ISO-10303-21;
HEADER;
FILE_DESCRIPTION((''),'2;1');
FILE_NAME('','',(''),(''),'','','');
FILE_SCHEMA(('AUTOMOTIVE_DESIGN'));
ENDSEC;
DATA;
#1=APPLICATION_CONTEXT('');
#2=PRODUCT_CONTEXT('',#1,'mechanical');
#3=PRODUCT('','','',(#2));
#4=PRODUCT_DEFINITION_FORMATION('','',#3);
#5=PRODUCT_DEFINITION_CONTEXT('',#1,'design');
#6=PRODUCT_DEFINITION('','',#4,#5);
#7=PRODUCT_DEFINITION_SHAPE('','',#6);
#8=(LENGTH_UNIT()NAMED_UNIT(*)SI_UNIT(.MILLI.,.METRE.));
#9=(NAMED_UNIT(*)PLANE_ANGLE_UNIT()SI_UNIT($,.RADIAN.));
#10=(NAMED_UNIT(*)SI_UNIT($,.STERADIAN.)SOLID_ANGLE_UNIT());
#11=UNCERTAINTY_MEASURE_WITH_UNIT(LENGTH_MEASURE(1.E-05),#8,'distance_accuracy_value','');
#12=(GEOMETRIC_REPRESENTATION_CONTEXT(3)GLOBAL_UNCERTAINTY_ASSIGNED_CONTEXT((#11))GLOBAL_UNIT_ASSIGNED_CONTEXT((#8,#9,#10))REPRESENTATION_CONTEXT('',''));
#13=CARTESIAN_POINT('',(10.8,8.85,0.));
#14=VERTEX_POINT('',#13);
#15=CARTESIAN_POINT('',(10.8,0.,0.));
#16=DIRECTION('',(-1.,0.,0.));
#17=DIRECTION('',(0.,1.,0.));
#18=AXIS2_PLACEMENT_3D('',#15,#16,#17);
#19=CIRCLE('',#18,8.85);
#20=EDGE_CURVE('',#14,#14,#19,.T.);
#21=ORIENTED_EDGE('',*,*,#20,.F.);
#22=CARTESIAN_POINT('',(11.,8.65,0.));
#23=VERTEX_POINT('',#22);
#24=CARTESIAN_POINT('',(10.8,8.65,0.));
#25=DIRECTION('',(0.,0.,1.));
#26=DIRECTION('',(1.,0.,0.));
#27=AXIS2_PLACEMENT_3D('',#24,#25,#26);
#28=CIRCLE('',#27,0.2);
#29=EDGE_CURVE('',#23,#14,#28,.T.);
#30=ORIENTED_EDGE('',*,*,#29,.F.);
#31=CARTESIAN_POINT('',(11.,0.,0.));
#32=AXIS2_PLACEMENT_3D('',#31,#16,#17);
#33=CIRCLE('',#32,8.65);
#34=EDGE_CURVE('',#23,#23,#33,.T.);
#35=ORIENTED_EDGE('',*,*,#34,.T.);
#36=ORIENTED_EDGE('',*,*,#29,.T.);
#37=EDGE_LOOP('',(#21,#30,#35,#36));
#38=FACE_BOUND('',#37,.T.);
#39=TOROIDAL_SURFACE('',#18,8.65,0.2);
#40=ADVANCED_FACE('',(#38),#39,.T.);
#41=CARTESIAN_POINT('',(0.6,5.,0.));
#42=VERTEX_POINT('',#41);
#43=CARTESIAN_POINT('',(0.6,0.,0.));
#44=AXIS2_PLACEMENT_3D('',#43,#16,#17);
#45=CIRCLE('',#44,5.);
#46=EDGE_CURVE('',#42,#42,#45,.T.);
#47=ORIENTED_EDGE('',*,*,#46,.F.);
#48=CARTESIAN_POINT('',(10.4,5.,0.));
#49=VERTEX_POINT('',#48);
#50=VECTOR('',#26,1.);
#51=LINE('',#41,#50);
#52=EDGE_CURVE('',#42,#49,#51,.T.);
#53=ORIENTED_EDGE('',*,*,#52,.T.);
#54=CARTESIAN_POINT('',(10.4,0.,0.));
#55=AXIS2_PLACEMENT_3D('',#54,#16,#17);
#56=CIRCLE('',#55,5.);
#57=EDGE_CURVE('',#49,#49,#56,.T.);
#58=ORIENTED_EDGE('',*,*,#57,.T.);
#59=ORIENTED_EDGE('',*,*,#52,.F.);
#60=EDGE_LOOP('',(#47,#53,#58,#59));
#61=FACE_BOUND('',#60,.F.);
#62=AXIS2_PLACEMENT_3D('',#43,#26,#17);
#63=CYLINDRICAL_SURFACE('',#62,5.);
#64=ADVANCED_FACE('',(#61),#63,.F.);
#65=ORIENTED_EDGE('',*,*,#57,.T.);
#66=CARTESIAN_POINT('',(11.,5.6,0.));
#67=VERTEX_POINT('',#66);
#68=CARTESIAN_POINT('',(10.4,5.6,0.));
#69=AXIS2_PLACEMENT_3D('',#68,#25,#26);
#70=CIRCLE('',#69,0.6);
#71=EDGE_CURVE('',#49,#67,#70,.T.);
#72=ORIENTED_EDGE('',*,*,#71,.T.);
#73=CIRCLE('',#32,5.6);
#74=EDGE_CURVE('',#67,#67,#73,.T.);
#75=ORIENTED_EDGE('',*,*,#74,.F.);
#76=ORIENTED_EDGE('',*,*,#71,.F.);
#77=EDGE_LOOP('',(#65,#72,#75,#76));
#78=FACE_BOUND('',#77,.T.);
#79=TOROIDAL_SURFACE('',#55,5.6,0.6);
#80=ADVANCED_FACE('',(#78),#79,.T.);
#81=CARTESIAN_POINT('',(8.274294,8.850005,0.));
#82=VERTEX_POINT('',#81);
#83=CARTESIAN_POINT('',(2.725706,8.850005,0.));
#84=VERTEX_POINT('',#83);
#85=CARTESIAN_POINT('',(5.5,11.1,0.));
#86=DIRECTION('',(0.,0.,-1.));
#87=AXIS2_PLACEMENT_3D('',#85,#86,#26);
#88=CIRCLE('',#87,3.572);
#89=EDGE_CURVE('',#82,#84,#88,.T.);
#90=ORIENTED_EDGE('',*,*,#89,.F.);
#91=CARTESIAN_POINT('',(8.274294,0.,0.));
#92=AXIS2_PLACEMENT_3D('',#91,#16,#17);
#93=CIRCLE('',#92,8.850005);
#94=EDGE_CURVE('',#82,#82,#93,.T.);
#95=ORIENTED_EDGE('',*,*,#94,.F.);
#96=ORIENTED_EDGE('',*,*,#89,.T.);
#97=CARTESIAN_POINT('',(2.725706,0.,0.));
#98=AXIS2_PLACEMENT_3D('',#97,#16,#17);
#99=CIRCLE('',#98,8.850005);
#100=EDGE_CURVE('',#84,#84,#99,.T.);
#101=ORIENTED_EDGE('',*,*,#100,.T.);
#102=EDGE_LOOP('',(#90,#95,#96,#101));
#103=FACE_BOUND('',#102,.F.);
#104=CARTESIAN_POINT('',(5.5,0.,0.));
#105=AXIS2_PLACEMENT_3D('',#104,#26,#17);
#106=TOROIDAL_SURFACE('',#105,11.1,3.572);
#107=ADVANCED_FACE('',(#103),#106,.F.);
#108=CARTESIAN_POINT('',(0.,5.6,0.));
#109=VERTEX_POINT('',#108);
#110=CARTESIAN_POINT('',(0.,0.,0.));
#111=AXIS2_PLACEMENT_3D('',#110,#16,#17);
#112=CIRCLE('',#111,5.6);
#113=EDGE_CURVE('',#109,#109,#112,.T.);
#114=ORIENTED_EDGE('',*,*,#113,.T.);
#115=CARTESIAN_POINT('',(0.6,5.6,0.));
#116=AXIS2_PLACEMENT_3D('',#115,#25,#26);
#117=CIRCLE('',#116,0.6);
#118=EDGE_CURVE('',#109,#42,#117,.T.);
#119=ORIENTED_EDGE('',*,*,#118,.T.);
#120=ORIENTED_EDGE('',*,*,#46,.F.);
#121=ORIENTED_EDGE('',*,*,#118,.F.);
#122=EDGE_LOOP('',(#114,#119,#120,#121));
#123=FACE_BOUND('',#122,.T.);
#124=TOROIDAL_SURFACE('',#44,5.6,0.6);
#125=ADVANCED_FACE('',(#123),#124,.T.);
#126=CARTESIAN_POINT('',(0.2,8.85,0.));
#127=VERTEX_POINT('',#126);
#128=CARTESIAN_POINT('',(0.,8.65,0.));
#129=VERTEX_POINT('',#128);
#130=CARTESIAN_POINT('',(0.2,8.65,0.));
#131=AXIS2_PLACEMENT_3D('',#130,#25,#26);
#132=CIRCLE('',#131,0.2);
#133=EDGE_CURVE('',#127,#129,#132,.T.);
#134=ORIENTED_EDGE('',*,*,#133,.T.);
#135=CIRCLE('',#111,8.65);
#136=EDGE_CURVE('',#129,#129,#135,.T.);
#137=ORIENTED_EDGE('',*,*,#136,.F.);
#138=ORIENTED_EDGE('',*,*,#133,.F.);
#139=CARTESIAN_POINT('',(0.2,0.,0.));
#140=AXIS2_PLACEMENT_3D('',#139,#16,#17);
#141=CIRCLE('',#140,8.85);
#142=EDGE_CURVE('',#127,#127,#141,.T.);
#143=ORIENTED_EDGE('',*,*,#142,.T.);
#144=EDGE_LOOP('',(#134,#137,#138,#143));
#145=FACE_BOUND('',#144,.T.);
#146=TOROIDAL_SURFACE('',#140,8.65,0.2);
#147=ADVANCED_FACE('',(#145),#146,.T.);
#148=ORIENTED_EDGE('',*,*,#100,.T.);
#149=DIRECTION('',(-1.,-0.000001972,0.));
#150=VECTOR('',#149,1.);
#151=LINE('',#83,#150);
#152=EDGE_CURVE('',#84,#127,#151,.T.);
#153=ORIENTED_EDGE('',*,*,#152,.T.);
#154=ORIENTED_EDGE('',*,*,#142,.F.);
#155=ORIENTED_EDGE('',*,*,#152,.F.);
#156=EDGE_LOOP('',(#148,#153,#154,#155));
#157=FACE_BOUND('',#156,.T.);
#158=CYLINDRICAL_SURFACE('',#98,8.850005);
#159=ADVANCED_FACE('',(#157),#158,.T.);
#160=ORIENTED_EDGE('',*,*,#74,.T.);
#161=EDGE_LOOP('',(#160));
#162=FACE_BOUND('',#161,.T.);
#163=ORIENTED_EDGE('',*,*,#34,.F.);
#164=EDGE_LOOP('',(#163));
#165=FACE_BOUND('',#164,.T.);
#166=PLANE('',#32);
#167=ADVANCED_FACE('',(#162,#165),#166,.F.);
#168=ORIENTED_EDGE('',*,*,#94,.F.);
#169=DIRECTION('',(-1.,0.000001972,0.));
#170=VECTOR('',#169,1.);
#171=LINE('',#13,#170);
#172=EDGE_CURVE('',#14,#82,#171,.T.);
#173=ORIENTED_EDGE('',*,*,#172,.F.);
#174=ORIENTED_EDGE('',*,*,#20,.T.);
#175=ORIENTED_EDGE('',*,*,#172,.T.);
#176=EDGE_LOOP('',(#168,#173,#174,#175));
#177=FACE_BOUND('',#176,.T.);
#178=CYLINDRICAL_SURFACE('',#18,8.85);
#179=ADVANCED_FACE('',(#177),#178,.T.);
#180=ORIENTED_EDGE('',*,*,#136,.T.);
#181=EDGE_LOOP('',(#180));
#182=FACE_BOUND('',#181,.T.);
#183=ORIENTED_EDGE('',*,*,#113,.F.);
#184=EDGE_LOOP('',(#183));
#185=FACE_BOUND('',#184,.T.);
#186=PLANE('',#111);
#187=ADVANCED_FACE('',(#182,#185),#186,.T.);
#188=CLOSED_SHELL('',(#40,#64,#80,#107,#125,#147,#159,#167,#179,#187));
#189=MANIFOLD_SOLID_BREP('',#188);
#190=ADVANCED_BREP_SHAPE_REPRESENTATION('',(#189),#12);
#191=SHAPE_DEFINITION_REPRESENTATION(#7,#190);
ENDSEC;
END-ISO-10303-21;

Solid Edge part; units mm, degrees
sketch "Sketch1" plane through (0, 0, 0) normal (0, 0, 1) x (1, 0, 0)
  arc A0 (0, 5.6) -> (0.6, 5) centre (0.6, 5.6) ccw
  line L0 (0.6, 5) -> (10.4, 5)
  arc A1 (10.4, 5) -> (11, 5.6) centre (10.4, 5.6) ccw
  line L1 (11, 5.6) -> (11, 8.65)
  arc A2 (11, 8.65) -> (10.8, 8.85) centre (10.8, 8.65) ccw
  line L2 (10.8, 8.85) -> (8.2743, 8.85)
  arc A3 (8.2743, 8.85) -> (2.7257, 8.85) centre (5.5, 11.1) cw
  line L3 (2.7257, 8.85) -> (0.2, 8.85)
  arc A4 (0.2, 8.85) -> (0, 8.65) centre (0.2, 8.65) ccw
  line L4 (0, 8.65) -> (0, 5.6)
revolve "RevolvedProtrusion1" add sketch "Sketch1" angle 360 about axis through (10.4, 0, 0) along (-1, 0, 0)
properties material "Steel"
